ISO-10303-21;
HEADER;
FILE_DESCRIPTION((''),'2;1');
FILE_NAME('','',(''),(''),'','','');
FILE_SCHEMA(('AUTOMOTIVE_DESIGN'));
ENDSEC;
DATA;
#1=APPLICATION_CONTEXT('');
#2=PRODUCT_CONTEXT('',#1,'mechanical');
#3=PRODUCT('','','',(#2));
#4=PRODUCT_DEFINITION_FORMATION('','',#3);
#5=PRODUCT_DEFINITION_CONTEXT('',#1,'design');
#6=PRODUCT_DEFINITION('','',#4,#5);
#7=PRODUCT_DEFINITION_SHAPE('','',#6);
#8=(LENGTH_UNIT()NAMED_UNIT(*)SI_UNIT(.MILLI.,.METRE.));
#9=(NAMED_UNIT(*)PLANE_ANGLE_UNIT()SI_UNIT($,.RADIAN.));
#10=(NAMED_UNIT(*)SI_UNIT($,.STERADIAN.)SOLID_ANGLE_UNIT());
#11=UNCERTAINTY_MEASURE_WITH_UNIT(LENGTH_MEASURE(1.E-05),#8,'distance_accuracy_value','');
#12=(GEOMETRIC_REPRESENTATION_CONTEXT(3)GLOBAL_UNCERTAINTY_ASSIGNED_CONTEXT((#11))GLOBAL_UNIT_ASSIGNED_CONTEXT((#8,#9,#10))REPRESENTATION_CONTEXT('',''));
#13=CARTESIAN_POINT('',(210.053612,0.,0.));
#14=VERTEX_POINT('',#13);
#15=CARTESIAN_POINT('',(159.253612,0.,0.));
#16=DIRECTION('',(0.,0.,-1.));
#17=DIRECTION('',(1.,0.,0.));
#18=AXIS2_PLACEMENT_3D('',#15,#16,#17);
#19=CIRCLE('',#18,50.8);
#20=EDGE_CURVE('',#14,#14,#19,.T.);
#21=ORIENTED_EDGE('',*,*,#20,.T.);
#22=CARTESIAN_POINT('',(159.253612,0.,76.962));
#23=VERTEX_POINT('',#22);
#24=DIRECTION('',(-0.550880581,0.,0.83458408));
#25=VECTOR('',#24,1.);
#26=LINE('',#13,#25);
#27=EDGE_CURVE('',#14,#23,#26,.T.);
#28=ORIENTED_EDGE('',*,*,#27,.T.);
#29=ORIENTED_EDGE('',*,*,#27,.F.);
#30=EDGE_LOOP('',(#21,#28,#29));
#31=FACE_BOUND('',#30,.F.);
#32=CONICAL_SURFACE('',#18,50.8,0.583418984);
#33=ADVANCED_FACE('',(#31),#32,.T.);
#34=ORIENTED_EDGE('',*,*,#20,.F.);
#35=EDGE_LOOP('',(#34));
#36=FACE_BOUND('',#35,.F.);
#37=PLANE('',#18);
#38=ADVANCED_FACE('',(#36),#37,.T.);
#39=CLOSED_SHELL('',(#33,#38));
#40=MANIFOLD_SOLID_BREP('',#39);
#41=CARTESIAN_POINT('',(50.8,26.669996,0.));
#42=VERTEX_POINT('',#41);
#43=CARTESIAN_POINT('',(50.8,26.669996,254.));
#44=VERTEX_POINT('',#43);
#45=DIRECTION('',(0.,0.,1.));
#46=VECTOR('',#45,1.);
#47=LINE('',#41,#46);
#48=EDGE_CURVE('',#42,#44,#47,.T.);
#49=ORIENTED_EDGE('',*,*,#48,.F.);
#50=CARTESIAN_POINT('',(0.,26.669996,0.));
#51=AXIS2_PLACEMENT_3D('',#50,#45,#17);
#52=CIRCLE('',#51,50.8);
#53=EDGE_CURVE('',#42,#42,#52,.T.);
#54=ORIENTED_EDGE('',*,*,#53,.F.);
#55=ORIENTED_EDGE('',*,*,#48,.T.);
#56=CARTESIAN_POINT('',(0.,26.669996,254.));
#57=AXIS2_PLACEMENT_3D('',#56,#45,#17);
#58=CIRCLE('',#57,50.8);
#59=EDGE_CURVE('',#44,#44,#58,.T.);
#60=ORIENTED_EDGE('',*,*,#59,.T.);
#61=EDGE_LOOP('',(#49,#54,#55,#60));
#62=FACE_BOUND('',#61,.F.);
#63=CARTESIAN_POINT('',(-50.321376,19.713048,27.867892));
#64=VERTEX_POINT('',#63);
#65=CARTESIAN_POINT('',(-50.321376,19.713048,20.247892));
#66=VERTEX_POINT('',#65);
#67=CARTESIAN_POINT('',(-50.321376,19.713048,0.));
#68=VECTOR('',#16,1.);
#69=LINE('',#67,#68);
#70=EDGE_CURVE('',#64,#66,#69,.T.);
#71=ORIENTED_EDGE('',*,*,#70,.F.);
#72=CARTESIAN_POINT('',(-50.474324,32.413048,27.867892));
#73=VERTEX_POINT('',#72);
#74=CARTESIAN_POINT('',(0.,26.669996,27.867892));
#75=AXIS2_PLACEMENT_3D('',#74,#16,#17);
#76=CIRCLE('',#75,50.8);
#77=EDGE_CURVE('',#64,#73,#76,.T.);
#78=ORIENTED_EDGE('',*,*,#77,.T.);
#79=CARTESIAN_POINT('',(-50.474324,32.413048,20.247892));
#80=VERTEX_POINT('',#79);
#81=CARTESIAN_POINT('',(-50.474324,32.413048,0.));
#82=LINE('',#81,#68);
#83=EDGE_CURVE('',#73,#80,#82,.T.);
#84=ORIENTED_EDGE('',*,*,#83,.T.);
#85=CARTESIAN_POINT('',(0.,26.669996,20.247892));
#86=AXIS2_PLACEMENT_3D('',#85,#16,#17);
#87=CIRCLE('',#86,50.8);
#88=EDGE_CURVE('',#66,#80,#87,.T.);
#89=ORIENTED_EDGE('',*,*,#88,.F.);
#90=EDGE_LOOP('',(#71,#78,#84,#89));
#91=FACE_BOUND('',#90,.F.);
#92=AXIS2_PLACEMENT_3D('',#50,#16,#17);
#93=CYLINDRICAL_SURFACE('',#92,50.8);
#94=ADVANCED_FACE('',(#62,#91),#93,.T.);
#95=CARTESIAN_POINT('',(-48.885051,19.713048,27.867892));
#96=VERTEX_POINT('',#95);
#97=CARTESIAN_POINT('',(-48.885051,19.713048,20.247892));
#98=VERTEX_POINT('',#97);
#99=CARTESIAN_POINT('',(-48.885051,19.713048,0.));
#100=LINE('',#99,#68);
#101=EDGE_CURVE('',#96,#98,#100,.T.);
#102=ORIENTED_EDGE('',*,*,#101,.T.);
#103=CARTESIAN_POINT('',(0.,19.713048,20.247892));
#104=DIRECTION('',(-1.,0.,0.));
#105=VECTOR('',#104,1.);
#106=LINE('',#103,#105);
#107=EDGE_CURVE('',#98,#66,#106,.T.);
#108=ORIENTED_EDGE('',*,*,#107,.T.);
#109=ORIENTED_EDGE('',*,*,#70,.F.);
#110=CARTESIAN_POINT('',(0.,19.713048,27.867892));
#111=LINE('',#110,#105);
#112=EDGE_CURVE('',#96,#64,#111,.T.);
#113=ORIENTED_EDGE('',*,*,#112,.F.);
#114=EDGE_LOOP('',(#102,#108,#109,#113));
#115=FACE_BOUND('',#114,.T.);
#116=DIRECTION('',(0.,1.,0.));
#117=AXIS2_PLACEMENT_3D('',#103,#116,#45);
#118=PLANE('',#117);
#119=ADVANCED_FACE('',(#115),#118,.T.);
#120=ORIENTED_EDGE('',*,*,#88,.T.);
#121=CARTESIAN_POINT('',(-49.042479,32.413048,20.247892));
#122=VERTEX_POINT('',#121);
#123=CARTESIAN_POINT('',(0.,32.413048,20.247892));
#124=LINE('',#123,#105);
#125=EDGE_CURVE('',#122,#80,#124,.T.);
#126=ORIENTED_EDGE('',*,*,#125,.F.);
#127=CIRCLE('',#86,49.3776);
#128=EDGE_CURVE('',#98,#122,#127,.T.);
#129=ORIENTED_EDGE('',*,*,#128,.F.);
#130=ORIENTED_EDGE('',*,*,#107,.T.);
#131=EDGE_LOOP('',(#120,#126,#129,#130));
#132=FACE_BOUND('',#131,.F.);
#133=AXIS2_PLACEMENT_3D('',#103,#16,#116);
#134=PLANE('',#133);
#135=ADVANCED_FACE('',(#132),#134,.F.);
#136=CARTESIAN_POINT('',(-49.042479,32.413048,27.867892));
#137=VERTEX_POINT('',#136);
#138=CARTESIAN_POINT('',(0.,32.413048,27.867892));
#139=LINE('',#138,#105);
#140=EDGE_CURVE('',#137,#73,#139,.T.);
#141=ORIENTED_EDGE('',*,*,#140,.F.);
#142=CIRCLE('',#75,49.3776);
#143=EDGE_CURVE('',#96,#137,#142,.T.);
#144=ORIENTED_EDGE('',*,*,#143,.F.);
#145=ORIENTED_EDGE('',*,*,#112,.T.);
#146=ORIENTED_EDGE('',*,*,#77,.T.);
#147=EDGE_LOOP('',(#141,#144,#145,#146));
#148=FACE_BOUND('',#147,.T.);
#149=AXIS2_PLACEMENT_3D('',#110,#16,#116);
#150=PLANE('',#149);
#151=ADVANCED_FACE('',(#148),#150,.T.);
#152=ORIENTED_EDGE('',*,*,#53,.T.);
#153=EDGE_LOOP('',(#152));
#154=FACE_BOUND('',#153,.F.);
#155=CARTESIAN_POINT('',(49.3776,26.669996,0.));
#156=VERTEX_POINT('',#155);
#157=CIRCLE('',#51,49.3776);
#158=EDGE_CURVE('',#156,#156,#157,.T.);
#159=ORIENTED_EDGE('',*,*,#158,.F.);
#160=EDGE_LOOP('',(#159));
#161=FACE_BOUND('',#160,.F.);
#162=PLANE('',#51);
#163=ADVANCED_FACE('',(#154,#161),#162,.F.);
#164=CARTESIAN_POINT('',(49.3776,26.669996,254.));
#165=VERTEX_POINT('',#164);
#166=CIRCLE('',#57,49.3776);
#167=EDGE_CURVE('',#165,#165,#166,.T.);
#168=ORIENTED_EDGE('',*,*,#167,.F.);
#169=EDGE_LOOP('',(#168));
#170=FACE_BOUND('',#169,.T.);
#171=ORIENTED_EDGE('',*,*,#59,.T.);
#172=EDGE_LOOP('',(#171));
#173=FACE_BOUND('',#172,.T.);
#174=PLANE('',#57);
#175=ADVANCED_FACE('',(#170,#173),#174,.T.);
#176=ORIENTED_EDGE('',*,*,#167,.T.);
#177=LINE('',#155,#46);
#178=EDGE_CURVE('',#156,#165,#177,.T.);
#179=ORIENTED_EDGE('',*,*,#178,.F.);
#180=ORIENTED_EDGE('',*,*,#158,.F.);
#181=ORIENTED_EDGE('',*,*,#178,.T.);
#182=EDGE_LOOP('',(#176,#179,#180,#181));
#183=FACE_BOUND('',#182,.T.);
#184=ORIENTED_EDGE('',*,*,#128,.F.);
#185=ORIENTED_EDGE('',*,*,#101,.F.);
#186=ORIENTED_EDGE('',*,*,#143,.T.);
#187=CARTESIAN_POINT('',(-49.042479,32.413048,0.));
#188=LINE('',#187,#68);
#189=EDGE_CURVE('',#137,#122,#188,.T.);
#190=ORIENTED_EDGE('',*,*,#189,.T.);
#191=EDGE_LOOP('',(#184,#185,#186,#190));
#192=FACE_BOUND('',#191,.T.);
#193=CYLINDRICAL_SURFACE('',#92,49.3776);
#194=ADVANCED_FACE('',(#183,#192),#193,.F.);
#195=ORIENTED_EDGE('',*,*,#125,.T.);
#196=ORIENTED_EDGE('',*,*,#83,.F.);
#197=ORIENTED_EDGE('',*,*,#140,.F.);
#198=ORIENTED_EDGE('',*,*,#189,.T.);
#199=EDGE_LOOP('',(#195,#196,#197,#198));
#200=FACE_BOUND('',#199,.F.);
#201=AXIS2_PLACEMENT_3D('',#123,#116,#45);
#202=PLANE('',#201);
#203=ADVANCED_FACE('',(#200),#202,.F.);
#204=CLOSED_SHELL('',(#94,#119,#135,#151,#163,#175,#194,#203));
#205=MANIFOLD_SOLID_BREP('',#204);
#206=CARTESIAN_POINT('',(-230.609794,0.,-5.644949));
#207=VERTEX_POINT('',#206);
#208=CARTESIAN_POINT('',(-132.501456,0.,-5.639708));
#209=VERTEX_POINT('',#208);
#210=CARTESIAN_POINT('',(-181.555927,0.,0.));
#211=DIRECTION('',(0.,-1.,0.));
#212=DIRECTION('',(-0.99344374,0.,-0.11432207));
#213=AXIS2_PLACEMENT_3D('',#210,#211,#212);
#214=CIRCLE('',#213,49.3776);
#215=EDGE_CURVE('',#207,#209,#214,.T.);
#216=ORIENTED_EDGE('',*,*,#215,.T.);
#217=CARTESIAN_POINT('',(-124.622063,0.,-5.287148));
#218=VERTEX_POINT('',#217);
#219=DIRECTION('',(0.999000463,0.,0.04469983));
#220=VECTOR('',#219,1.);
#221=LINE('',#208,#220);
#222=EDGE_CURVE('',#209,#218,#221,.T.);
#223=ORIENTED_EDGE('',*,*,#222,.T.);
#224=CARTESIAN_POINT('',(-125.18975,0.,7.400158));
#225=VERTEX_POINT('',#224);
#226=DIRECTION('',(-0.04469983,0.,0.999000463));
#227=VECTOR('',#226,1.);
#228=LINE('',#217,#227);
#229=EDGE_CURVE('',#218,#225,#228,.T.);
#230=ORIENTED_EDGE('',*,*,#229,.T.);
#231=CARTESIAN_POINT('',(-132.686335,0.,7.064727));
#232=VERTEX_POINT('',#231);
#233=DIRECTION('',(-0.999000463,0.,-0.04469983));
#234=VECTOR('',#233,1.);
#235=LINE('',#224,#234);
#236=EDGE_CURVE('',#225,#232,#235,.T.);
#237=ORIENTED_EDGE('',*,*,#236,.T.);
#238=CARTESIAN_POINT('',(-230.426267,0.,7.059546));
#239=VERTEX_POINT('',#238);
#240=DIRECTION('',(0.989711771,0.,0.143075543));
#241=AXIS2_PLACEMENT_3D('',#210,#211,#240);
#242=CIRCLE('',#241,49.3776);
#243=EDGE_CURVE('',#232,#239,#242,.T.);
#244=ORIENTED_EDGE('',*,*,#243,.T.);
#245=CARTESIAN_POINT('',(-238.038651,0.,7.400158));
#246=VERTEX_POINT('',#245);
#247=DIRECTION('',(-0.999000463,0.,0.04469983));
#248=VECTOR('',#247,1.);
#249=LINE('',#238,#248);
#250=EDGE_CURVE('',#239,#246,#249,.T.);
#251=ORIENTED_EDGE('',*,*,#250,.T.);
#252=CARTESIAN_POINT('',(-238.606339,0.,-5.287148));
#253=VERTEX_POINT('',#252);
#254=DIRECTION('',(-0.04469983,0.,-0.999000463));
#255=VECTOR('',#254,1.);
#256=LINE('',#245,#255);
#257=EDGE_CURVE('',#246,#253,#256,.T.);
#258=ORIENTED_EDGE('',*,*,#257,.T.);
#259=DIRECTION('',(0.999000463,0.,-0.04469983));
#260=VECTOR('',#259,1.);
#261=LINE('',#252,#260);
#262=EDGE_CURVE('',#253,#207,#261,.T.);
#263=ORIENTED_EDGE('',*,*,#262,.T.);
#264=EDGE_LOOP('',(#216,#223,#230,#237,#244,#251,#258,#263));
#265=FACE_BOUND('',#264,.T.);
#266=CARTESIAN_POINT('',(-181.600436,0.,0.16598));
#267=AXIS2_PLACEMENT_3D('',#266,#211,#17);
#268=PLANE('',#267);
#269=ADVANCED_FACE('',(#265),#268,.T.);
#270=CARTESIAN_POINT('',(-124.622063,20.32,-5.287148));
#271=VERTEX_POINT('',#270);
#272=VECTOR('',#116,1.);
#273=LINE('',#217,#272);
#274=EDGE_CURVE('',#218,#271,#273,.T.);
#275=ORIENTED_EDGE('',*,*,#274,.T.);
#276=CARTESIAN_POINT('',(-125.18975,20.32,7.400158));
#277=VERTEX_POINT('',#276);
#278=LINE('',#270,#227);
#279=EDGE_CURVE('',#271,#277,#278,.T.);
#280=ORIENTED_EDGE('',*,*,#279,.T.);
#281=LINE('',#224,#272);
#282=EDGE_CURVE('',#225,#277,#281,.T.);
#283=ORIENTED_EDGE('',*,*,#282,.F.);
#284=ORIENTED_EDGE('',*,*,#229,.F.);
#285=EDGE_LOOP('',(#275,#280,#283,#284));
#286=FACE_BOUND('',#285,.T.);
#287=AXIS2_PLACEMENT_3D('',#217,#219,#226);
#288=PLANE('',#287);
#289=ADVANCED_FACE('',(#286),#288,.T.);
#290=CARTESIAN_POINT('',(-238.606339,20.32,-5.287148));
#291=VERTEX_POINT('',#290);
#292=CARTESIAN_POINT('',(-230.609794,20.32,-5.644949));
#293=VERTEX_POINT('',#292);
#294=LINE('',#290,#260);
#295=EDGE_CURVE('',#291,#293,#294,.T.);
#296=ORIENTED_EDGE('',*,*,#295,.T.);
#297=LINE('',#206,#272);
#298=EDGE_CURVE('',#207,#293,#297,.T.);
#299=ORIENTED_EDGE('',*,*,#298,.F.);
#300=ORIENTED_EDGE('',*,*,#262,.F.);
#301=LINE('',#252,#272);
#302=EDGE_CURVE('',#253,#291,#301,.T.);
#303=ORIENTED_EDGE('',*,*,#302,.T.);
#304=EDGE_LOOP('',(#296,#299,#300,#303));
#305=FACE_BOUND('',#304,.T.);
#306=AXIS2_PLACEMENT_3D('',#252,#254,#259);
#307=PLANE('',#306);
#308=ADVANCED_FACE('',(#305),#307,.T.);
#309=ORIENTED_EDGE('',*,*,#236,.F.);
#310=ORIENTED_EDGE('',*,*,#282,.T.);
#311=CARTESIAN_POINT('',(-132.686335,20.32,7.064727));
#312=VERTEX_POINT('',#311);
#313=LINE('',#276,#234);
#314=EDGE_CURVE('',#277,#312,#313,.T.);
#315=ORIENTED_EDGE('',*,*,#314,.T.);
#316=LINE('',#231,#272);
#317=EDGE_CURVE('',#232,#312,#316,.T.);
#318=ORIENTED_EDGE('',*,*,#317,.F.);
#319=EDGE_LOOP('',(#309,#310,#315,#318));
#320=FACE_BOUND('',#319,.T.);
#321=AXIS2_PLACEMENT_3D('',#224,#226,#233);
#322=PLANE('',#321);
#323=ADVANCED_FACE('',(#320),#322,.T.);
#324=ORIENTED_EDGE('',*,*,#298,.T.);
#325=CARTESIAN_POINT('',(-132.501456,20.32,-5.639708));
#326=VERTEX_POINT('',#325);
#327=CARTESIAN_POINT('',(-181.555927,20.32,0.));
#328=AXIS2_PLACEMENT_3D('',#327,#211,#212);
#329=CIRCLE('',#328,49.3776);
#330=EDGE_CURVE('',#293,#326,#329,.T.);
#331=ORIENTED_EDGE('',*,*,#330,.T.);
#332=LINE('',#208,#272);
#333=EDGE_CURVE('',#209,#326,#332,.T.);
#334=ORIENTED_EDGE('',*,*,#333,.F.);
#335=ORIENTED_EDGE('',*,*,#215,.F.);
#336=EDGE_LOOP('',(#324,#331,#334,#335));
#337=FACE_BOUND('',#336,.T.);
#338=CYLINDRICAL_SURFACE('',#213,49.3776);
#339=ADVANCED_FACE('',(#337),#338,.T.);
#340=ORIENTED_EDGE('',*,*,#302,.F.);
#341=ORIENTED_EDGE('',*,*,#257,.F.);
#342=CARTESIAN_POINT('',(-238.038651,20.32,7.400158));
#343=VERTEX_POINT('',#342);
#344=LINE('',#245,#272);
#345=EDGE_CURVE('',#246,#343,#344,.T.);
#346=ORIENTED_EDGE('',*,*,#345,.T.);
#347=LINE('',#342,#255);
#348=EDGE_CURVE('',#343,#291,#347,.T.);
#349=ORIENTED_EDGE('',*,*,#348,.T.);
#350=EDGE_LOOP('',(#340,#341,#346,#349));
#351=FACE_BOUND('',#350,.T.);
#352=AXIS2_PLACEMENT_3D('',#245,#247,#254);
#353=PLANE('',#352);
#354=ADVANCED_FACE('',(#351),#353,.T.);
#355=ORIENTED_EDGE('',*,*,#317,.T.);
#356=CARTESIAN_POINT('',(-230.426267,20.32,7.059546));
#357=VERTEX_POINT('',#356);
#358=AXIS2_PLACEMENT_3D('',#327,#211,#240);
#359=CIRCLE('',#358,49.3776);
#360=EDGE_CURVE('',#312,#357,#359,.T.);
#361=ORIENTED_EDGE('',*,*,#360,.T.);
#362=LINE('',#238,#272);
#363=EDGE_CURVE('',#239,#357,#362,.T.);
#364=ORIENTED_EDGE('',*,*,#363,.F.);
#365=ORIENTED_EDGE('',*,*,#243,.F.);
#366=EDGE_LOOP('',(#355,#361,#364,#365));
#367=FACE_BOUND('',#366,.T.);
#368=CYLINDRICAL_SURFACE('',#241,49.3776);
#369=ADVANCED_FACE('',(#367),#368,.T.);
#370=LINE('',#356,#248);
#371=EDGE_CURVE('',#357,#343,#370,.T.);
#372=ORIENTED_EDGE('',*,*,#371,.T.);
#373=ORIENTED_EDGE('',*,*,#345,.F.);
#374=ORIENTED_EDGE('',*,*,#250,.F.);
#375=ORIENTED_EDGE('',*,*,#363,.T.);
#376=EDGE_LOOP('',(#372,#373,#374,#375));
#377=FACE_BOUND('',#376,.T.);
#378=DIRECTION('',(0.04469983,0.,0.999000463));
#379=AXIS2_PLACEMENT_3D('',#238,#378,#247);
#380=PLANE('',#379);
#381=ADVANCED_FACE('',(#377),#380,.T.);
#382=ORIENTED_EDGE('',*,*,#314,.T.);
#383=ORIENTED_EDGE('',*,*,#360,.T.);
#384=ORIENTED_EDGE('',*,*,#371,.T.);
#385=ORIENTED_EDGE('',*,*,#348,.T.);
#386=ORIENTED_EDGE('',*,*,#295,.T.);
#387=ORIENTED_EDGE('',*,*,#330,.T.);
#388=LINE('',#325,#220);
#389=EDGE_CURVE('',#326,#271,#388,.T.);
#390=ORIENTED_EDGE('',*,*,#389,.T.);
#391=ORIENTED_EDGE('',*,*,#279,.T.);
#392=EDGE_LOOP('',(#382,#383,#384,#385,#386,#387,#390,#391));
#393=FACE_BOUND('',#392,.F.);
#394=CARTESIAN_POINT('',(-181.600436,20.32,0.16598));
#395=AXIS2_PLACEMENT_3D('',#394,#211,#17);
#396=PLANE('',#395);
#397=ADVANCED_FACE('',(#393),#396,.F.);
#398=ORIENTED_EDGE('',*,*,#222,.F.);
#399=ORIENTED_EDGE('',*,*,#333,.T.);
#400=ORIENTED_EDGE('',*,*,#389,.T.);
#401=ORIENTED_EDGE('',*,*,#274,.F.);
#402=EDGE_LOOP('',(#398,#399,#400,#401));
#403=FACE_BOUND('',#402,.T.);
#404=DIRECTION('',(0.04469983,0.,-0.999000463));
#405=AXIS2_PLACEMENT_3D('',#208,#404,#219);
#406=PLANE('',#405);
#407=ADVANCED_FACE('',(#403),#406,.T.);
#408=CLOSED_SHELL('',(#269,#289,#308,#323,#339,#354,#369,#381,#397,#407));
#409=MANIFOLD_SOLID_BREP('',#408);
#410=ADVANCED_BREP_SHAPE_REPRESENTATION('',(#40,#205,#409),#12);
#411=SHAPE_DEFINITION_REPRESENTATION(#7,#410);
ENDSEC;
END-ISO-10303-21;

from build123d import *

# Parameters (mm, degrees)
F0_R     = 50.8
F0_R_2   = 49.3776
F1_DEPTH = 254
F4_DEPTH = 20.32
F5_W     = 12.7
F5_H     = 7.62
F6_DEPTH = 127
F8_DEPTH = 12.7


with BuildPart() as f1:
    # F0 (on Top) → F1 (new body)
    with BuildSketch(Plane.XY):
        with Locations((0, 26.6699958593)):
            Circle(F0_R)
        with Locations((0, 26.6699958593)):
            Circle(F0_R_2, mode=Mode.SUBTRACT)
    extrude(amount=F1_DEPTH)

    # F5 (on Right) → F6 (cut)
    with BuildSketch(Plane.YZ):
        with Locations((26.0630475703, 24.0578921512)):
            Rectangle(F5_W, F5_H)
    extrude(amount=-F6_DEPTH, mode=Mode.SUBTRACT)

    # F0 (on Top) → F8 (cut)
    with BuildSketch(Plane.XY):
        with Locations((0, 26.6699958593)):
            Circle(F0_R_2)
    extrude(amount=F8_DEPTH, mode=Mode.SUBTRACT)


with BuildPart() as f3:
    # F2 (on Front) → F3 (revolve)
    with BuildSketch(Plane.XZ):
        Polygon((210.0536121607, 0), (159.2536121607, 76.962), (159.2536121607, 0), (177.7075566351, 0), (191.6012279689, 0), align=None)
    revolve(axis=Axis((159.2536121607, 0, 38.481), (0, 0, -1)))


with BuildPart() as f4:
    # F2 (on Front) → F4 (new body)
    with BuildSketch(Plane.XZ):
        with BuildLine():
            Line((-238.6063388573, -5.2871476303), (-230.6097944098, -5.6449494469))
            ThreePointArc((-230.6097944098, -5.6449494469), (-181.5532885898, -49.3775999295), (-132.5014562586, -5.6397075884))
            Line((-132.5014562586, -5.6397075884), (-124.6220625717, -5.2871476303))
            Line((-124.6220625717, -5.2871476303), (-125.1897504177, 7.4001582504))
            Line((-125.1897504177, 7.4001582504), (-132.6863348709, 7.0647269208))
            ThreePointArc((-132.6863348709, 7.0647269208), (-181.5585443994, 49.3775999306), (-230.4262674829, 7.0595455428))
            Line((-230.4262674829, 7.0595455428), (-238.0386510113, 7.4001582504))
            Line((-238.0386510113, 7.4001582504), (-238.6063388573, -5.2871476303))
        make_face()
    extrude(amount=-F4_DEPTH)


solid = Compound([f1.part, f3.part, f4.part])
